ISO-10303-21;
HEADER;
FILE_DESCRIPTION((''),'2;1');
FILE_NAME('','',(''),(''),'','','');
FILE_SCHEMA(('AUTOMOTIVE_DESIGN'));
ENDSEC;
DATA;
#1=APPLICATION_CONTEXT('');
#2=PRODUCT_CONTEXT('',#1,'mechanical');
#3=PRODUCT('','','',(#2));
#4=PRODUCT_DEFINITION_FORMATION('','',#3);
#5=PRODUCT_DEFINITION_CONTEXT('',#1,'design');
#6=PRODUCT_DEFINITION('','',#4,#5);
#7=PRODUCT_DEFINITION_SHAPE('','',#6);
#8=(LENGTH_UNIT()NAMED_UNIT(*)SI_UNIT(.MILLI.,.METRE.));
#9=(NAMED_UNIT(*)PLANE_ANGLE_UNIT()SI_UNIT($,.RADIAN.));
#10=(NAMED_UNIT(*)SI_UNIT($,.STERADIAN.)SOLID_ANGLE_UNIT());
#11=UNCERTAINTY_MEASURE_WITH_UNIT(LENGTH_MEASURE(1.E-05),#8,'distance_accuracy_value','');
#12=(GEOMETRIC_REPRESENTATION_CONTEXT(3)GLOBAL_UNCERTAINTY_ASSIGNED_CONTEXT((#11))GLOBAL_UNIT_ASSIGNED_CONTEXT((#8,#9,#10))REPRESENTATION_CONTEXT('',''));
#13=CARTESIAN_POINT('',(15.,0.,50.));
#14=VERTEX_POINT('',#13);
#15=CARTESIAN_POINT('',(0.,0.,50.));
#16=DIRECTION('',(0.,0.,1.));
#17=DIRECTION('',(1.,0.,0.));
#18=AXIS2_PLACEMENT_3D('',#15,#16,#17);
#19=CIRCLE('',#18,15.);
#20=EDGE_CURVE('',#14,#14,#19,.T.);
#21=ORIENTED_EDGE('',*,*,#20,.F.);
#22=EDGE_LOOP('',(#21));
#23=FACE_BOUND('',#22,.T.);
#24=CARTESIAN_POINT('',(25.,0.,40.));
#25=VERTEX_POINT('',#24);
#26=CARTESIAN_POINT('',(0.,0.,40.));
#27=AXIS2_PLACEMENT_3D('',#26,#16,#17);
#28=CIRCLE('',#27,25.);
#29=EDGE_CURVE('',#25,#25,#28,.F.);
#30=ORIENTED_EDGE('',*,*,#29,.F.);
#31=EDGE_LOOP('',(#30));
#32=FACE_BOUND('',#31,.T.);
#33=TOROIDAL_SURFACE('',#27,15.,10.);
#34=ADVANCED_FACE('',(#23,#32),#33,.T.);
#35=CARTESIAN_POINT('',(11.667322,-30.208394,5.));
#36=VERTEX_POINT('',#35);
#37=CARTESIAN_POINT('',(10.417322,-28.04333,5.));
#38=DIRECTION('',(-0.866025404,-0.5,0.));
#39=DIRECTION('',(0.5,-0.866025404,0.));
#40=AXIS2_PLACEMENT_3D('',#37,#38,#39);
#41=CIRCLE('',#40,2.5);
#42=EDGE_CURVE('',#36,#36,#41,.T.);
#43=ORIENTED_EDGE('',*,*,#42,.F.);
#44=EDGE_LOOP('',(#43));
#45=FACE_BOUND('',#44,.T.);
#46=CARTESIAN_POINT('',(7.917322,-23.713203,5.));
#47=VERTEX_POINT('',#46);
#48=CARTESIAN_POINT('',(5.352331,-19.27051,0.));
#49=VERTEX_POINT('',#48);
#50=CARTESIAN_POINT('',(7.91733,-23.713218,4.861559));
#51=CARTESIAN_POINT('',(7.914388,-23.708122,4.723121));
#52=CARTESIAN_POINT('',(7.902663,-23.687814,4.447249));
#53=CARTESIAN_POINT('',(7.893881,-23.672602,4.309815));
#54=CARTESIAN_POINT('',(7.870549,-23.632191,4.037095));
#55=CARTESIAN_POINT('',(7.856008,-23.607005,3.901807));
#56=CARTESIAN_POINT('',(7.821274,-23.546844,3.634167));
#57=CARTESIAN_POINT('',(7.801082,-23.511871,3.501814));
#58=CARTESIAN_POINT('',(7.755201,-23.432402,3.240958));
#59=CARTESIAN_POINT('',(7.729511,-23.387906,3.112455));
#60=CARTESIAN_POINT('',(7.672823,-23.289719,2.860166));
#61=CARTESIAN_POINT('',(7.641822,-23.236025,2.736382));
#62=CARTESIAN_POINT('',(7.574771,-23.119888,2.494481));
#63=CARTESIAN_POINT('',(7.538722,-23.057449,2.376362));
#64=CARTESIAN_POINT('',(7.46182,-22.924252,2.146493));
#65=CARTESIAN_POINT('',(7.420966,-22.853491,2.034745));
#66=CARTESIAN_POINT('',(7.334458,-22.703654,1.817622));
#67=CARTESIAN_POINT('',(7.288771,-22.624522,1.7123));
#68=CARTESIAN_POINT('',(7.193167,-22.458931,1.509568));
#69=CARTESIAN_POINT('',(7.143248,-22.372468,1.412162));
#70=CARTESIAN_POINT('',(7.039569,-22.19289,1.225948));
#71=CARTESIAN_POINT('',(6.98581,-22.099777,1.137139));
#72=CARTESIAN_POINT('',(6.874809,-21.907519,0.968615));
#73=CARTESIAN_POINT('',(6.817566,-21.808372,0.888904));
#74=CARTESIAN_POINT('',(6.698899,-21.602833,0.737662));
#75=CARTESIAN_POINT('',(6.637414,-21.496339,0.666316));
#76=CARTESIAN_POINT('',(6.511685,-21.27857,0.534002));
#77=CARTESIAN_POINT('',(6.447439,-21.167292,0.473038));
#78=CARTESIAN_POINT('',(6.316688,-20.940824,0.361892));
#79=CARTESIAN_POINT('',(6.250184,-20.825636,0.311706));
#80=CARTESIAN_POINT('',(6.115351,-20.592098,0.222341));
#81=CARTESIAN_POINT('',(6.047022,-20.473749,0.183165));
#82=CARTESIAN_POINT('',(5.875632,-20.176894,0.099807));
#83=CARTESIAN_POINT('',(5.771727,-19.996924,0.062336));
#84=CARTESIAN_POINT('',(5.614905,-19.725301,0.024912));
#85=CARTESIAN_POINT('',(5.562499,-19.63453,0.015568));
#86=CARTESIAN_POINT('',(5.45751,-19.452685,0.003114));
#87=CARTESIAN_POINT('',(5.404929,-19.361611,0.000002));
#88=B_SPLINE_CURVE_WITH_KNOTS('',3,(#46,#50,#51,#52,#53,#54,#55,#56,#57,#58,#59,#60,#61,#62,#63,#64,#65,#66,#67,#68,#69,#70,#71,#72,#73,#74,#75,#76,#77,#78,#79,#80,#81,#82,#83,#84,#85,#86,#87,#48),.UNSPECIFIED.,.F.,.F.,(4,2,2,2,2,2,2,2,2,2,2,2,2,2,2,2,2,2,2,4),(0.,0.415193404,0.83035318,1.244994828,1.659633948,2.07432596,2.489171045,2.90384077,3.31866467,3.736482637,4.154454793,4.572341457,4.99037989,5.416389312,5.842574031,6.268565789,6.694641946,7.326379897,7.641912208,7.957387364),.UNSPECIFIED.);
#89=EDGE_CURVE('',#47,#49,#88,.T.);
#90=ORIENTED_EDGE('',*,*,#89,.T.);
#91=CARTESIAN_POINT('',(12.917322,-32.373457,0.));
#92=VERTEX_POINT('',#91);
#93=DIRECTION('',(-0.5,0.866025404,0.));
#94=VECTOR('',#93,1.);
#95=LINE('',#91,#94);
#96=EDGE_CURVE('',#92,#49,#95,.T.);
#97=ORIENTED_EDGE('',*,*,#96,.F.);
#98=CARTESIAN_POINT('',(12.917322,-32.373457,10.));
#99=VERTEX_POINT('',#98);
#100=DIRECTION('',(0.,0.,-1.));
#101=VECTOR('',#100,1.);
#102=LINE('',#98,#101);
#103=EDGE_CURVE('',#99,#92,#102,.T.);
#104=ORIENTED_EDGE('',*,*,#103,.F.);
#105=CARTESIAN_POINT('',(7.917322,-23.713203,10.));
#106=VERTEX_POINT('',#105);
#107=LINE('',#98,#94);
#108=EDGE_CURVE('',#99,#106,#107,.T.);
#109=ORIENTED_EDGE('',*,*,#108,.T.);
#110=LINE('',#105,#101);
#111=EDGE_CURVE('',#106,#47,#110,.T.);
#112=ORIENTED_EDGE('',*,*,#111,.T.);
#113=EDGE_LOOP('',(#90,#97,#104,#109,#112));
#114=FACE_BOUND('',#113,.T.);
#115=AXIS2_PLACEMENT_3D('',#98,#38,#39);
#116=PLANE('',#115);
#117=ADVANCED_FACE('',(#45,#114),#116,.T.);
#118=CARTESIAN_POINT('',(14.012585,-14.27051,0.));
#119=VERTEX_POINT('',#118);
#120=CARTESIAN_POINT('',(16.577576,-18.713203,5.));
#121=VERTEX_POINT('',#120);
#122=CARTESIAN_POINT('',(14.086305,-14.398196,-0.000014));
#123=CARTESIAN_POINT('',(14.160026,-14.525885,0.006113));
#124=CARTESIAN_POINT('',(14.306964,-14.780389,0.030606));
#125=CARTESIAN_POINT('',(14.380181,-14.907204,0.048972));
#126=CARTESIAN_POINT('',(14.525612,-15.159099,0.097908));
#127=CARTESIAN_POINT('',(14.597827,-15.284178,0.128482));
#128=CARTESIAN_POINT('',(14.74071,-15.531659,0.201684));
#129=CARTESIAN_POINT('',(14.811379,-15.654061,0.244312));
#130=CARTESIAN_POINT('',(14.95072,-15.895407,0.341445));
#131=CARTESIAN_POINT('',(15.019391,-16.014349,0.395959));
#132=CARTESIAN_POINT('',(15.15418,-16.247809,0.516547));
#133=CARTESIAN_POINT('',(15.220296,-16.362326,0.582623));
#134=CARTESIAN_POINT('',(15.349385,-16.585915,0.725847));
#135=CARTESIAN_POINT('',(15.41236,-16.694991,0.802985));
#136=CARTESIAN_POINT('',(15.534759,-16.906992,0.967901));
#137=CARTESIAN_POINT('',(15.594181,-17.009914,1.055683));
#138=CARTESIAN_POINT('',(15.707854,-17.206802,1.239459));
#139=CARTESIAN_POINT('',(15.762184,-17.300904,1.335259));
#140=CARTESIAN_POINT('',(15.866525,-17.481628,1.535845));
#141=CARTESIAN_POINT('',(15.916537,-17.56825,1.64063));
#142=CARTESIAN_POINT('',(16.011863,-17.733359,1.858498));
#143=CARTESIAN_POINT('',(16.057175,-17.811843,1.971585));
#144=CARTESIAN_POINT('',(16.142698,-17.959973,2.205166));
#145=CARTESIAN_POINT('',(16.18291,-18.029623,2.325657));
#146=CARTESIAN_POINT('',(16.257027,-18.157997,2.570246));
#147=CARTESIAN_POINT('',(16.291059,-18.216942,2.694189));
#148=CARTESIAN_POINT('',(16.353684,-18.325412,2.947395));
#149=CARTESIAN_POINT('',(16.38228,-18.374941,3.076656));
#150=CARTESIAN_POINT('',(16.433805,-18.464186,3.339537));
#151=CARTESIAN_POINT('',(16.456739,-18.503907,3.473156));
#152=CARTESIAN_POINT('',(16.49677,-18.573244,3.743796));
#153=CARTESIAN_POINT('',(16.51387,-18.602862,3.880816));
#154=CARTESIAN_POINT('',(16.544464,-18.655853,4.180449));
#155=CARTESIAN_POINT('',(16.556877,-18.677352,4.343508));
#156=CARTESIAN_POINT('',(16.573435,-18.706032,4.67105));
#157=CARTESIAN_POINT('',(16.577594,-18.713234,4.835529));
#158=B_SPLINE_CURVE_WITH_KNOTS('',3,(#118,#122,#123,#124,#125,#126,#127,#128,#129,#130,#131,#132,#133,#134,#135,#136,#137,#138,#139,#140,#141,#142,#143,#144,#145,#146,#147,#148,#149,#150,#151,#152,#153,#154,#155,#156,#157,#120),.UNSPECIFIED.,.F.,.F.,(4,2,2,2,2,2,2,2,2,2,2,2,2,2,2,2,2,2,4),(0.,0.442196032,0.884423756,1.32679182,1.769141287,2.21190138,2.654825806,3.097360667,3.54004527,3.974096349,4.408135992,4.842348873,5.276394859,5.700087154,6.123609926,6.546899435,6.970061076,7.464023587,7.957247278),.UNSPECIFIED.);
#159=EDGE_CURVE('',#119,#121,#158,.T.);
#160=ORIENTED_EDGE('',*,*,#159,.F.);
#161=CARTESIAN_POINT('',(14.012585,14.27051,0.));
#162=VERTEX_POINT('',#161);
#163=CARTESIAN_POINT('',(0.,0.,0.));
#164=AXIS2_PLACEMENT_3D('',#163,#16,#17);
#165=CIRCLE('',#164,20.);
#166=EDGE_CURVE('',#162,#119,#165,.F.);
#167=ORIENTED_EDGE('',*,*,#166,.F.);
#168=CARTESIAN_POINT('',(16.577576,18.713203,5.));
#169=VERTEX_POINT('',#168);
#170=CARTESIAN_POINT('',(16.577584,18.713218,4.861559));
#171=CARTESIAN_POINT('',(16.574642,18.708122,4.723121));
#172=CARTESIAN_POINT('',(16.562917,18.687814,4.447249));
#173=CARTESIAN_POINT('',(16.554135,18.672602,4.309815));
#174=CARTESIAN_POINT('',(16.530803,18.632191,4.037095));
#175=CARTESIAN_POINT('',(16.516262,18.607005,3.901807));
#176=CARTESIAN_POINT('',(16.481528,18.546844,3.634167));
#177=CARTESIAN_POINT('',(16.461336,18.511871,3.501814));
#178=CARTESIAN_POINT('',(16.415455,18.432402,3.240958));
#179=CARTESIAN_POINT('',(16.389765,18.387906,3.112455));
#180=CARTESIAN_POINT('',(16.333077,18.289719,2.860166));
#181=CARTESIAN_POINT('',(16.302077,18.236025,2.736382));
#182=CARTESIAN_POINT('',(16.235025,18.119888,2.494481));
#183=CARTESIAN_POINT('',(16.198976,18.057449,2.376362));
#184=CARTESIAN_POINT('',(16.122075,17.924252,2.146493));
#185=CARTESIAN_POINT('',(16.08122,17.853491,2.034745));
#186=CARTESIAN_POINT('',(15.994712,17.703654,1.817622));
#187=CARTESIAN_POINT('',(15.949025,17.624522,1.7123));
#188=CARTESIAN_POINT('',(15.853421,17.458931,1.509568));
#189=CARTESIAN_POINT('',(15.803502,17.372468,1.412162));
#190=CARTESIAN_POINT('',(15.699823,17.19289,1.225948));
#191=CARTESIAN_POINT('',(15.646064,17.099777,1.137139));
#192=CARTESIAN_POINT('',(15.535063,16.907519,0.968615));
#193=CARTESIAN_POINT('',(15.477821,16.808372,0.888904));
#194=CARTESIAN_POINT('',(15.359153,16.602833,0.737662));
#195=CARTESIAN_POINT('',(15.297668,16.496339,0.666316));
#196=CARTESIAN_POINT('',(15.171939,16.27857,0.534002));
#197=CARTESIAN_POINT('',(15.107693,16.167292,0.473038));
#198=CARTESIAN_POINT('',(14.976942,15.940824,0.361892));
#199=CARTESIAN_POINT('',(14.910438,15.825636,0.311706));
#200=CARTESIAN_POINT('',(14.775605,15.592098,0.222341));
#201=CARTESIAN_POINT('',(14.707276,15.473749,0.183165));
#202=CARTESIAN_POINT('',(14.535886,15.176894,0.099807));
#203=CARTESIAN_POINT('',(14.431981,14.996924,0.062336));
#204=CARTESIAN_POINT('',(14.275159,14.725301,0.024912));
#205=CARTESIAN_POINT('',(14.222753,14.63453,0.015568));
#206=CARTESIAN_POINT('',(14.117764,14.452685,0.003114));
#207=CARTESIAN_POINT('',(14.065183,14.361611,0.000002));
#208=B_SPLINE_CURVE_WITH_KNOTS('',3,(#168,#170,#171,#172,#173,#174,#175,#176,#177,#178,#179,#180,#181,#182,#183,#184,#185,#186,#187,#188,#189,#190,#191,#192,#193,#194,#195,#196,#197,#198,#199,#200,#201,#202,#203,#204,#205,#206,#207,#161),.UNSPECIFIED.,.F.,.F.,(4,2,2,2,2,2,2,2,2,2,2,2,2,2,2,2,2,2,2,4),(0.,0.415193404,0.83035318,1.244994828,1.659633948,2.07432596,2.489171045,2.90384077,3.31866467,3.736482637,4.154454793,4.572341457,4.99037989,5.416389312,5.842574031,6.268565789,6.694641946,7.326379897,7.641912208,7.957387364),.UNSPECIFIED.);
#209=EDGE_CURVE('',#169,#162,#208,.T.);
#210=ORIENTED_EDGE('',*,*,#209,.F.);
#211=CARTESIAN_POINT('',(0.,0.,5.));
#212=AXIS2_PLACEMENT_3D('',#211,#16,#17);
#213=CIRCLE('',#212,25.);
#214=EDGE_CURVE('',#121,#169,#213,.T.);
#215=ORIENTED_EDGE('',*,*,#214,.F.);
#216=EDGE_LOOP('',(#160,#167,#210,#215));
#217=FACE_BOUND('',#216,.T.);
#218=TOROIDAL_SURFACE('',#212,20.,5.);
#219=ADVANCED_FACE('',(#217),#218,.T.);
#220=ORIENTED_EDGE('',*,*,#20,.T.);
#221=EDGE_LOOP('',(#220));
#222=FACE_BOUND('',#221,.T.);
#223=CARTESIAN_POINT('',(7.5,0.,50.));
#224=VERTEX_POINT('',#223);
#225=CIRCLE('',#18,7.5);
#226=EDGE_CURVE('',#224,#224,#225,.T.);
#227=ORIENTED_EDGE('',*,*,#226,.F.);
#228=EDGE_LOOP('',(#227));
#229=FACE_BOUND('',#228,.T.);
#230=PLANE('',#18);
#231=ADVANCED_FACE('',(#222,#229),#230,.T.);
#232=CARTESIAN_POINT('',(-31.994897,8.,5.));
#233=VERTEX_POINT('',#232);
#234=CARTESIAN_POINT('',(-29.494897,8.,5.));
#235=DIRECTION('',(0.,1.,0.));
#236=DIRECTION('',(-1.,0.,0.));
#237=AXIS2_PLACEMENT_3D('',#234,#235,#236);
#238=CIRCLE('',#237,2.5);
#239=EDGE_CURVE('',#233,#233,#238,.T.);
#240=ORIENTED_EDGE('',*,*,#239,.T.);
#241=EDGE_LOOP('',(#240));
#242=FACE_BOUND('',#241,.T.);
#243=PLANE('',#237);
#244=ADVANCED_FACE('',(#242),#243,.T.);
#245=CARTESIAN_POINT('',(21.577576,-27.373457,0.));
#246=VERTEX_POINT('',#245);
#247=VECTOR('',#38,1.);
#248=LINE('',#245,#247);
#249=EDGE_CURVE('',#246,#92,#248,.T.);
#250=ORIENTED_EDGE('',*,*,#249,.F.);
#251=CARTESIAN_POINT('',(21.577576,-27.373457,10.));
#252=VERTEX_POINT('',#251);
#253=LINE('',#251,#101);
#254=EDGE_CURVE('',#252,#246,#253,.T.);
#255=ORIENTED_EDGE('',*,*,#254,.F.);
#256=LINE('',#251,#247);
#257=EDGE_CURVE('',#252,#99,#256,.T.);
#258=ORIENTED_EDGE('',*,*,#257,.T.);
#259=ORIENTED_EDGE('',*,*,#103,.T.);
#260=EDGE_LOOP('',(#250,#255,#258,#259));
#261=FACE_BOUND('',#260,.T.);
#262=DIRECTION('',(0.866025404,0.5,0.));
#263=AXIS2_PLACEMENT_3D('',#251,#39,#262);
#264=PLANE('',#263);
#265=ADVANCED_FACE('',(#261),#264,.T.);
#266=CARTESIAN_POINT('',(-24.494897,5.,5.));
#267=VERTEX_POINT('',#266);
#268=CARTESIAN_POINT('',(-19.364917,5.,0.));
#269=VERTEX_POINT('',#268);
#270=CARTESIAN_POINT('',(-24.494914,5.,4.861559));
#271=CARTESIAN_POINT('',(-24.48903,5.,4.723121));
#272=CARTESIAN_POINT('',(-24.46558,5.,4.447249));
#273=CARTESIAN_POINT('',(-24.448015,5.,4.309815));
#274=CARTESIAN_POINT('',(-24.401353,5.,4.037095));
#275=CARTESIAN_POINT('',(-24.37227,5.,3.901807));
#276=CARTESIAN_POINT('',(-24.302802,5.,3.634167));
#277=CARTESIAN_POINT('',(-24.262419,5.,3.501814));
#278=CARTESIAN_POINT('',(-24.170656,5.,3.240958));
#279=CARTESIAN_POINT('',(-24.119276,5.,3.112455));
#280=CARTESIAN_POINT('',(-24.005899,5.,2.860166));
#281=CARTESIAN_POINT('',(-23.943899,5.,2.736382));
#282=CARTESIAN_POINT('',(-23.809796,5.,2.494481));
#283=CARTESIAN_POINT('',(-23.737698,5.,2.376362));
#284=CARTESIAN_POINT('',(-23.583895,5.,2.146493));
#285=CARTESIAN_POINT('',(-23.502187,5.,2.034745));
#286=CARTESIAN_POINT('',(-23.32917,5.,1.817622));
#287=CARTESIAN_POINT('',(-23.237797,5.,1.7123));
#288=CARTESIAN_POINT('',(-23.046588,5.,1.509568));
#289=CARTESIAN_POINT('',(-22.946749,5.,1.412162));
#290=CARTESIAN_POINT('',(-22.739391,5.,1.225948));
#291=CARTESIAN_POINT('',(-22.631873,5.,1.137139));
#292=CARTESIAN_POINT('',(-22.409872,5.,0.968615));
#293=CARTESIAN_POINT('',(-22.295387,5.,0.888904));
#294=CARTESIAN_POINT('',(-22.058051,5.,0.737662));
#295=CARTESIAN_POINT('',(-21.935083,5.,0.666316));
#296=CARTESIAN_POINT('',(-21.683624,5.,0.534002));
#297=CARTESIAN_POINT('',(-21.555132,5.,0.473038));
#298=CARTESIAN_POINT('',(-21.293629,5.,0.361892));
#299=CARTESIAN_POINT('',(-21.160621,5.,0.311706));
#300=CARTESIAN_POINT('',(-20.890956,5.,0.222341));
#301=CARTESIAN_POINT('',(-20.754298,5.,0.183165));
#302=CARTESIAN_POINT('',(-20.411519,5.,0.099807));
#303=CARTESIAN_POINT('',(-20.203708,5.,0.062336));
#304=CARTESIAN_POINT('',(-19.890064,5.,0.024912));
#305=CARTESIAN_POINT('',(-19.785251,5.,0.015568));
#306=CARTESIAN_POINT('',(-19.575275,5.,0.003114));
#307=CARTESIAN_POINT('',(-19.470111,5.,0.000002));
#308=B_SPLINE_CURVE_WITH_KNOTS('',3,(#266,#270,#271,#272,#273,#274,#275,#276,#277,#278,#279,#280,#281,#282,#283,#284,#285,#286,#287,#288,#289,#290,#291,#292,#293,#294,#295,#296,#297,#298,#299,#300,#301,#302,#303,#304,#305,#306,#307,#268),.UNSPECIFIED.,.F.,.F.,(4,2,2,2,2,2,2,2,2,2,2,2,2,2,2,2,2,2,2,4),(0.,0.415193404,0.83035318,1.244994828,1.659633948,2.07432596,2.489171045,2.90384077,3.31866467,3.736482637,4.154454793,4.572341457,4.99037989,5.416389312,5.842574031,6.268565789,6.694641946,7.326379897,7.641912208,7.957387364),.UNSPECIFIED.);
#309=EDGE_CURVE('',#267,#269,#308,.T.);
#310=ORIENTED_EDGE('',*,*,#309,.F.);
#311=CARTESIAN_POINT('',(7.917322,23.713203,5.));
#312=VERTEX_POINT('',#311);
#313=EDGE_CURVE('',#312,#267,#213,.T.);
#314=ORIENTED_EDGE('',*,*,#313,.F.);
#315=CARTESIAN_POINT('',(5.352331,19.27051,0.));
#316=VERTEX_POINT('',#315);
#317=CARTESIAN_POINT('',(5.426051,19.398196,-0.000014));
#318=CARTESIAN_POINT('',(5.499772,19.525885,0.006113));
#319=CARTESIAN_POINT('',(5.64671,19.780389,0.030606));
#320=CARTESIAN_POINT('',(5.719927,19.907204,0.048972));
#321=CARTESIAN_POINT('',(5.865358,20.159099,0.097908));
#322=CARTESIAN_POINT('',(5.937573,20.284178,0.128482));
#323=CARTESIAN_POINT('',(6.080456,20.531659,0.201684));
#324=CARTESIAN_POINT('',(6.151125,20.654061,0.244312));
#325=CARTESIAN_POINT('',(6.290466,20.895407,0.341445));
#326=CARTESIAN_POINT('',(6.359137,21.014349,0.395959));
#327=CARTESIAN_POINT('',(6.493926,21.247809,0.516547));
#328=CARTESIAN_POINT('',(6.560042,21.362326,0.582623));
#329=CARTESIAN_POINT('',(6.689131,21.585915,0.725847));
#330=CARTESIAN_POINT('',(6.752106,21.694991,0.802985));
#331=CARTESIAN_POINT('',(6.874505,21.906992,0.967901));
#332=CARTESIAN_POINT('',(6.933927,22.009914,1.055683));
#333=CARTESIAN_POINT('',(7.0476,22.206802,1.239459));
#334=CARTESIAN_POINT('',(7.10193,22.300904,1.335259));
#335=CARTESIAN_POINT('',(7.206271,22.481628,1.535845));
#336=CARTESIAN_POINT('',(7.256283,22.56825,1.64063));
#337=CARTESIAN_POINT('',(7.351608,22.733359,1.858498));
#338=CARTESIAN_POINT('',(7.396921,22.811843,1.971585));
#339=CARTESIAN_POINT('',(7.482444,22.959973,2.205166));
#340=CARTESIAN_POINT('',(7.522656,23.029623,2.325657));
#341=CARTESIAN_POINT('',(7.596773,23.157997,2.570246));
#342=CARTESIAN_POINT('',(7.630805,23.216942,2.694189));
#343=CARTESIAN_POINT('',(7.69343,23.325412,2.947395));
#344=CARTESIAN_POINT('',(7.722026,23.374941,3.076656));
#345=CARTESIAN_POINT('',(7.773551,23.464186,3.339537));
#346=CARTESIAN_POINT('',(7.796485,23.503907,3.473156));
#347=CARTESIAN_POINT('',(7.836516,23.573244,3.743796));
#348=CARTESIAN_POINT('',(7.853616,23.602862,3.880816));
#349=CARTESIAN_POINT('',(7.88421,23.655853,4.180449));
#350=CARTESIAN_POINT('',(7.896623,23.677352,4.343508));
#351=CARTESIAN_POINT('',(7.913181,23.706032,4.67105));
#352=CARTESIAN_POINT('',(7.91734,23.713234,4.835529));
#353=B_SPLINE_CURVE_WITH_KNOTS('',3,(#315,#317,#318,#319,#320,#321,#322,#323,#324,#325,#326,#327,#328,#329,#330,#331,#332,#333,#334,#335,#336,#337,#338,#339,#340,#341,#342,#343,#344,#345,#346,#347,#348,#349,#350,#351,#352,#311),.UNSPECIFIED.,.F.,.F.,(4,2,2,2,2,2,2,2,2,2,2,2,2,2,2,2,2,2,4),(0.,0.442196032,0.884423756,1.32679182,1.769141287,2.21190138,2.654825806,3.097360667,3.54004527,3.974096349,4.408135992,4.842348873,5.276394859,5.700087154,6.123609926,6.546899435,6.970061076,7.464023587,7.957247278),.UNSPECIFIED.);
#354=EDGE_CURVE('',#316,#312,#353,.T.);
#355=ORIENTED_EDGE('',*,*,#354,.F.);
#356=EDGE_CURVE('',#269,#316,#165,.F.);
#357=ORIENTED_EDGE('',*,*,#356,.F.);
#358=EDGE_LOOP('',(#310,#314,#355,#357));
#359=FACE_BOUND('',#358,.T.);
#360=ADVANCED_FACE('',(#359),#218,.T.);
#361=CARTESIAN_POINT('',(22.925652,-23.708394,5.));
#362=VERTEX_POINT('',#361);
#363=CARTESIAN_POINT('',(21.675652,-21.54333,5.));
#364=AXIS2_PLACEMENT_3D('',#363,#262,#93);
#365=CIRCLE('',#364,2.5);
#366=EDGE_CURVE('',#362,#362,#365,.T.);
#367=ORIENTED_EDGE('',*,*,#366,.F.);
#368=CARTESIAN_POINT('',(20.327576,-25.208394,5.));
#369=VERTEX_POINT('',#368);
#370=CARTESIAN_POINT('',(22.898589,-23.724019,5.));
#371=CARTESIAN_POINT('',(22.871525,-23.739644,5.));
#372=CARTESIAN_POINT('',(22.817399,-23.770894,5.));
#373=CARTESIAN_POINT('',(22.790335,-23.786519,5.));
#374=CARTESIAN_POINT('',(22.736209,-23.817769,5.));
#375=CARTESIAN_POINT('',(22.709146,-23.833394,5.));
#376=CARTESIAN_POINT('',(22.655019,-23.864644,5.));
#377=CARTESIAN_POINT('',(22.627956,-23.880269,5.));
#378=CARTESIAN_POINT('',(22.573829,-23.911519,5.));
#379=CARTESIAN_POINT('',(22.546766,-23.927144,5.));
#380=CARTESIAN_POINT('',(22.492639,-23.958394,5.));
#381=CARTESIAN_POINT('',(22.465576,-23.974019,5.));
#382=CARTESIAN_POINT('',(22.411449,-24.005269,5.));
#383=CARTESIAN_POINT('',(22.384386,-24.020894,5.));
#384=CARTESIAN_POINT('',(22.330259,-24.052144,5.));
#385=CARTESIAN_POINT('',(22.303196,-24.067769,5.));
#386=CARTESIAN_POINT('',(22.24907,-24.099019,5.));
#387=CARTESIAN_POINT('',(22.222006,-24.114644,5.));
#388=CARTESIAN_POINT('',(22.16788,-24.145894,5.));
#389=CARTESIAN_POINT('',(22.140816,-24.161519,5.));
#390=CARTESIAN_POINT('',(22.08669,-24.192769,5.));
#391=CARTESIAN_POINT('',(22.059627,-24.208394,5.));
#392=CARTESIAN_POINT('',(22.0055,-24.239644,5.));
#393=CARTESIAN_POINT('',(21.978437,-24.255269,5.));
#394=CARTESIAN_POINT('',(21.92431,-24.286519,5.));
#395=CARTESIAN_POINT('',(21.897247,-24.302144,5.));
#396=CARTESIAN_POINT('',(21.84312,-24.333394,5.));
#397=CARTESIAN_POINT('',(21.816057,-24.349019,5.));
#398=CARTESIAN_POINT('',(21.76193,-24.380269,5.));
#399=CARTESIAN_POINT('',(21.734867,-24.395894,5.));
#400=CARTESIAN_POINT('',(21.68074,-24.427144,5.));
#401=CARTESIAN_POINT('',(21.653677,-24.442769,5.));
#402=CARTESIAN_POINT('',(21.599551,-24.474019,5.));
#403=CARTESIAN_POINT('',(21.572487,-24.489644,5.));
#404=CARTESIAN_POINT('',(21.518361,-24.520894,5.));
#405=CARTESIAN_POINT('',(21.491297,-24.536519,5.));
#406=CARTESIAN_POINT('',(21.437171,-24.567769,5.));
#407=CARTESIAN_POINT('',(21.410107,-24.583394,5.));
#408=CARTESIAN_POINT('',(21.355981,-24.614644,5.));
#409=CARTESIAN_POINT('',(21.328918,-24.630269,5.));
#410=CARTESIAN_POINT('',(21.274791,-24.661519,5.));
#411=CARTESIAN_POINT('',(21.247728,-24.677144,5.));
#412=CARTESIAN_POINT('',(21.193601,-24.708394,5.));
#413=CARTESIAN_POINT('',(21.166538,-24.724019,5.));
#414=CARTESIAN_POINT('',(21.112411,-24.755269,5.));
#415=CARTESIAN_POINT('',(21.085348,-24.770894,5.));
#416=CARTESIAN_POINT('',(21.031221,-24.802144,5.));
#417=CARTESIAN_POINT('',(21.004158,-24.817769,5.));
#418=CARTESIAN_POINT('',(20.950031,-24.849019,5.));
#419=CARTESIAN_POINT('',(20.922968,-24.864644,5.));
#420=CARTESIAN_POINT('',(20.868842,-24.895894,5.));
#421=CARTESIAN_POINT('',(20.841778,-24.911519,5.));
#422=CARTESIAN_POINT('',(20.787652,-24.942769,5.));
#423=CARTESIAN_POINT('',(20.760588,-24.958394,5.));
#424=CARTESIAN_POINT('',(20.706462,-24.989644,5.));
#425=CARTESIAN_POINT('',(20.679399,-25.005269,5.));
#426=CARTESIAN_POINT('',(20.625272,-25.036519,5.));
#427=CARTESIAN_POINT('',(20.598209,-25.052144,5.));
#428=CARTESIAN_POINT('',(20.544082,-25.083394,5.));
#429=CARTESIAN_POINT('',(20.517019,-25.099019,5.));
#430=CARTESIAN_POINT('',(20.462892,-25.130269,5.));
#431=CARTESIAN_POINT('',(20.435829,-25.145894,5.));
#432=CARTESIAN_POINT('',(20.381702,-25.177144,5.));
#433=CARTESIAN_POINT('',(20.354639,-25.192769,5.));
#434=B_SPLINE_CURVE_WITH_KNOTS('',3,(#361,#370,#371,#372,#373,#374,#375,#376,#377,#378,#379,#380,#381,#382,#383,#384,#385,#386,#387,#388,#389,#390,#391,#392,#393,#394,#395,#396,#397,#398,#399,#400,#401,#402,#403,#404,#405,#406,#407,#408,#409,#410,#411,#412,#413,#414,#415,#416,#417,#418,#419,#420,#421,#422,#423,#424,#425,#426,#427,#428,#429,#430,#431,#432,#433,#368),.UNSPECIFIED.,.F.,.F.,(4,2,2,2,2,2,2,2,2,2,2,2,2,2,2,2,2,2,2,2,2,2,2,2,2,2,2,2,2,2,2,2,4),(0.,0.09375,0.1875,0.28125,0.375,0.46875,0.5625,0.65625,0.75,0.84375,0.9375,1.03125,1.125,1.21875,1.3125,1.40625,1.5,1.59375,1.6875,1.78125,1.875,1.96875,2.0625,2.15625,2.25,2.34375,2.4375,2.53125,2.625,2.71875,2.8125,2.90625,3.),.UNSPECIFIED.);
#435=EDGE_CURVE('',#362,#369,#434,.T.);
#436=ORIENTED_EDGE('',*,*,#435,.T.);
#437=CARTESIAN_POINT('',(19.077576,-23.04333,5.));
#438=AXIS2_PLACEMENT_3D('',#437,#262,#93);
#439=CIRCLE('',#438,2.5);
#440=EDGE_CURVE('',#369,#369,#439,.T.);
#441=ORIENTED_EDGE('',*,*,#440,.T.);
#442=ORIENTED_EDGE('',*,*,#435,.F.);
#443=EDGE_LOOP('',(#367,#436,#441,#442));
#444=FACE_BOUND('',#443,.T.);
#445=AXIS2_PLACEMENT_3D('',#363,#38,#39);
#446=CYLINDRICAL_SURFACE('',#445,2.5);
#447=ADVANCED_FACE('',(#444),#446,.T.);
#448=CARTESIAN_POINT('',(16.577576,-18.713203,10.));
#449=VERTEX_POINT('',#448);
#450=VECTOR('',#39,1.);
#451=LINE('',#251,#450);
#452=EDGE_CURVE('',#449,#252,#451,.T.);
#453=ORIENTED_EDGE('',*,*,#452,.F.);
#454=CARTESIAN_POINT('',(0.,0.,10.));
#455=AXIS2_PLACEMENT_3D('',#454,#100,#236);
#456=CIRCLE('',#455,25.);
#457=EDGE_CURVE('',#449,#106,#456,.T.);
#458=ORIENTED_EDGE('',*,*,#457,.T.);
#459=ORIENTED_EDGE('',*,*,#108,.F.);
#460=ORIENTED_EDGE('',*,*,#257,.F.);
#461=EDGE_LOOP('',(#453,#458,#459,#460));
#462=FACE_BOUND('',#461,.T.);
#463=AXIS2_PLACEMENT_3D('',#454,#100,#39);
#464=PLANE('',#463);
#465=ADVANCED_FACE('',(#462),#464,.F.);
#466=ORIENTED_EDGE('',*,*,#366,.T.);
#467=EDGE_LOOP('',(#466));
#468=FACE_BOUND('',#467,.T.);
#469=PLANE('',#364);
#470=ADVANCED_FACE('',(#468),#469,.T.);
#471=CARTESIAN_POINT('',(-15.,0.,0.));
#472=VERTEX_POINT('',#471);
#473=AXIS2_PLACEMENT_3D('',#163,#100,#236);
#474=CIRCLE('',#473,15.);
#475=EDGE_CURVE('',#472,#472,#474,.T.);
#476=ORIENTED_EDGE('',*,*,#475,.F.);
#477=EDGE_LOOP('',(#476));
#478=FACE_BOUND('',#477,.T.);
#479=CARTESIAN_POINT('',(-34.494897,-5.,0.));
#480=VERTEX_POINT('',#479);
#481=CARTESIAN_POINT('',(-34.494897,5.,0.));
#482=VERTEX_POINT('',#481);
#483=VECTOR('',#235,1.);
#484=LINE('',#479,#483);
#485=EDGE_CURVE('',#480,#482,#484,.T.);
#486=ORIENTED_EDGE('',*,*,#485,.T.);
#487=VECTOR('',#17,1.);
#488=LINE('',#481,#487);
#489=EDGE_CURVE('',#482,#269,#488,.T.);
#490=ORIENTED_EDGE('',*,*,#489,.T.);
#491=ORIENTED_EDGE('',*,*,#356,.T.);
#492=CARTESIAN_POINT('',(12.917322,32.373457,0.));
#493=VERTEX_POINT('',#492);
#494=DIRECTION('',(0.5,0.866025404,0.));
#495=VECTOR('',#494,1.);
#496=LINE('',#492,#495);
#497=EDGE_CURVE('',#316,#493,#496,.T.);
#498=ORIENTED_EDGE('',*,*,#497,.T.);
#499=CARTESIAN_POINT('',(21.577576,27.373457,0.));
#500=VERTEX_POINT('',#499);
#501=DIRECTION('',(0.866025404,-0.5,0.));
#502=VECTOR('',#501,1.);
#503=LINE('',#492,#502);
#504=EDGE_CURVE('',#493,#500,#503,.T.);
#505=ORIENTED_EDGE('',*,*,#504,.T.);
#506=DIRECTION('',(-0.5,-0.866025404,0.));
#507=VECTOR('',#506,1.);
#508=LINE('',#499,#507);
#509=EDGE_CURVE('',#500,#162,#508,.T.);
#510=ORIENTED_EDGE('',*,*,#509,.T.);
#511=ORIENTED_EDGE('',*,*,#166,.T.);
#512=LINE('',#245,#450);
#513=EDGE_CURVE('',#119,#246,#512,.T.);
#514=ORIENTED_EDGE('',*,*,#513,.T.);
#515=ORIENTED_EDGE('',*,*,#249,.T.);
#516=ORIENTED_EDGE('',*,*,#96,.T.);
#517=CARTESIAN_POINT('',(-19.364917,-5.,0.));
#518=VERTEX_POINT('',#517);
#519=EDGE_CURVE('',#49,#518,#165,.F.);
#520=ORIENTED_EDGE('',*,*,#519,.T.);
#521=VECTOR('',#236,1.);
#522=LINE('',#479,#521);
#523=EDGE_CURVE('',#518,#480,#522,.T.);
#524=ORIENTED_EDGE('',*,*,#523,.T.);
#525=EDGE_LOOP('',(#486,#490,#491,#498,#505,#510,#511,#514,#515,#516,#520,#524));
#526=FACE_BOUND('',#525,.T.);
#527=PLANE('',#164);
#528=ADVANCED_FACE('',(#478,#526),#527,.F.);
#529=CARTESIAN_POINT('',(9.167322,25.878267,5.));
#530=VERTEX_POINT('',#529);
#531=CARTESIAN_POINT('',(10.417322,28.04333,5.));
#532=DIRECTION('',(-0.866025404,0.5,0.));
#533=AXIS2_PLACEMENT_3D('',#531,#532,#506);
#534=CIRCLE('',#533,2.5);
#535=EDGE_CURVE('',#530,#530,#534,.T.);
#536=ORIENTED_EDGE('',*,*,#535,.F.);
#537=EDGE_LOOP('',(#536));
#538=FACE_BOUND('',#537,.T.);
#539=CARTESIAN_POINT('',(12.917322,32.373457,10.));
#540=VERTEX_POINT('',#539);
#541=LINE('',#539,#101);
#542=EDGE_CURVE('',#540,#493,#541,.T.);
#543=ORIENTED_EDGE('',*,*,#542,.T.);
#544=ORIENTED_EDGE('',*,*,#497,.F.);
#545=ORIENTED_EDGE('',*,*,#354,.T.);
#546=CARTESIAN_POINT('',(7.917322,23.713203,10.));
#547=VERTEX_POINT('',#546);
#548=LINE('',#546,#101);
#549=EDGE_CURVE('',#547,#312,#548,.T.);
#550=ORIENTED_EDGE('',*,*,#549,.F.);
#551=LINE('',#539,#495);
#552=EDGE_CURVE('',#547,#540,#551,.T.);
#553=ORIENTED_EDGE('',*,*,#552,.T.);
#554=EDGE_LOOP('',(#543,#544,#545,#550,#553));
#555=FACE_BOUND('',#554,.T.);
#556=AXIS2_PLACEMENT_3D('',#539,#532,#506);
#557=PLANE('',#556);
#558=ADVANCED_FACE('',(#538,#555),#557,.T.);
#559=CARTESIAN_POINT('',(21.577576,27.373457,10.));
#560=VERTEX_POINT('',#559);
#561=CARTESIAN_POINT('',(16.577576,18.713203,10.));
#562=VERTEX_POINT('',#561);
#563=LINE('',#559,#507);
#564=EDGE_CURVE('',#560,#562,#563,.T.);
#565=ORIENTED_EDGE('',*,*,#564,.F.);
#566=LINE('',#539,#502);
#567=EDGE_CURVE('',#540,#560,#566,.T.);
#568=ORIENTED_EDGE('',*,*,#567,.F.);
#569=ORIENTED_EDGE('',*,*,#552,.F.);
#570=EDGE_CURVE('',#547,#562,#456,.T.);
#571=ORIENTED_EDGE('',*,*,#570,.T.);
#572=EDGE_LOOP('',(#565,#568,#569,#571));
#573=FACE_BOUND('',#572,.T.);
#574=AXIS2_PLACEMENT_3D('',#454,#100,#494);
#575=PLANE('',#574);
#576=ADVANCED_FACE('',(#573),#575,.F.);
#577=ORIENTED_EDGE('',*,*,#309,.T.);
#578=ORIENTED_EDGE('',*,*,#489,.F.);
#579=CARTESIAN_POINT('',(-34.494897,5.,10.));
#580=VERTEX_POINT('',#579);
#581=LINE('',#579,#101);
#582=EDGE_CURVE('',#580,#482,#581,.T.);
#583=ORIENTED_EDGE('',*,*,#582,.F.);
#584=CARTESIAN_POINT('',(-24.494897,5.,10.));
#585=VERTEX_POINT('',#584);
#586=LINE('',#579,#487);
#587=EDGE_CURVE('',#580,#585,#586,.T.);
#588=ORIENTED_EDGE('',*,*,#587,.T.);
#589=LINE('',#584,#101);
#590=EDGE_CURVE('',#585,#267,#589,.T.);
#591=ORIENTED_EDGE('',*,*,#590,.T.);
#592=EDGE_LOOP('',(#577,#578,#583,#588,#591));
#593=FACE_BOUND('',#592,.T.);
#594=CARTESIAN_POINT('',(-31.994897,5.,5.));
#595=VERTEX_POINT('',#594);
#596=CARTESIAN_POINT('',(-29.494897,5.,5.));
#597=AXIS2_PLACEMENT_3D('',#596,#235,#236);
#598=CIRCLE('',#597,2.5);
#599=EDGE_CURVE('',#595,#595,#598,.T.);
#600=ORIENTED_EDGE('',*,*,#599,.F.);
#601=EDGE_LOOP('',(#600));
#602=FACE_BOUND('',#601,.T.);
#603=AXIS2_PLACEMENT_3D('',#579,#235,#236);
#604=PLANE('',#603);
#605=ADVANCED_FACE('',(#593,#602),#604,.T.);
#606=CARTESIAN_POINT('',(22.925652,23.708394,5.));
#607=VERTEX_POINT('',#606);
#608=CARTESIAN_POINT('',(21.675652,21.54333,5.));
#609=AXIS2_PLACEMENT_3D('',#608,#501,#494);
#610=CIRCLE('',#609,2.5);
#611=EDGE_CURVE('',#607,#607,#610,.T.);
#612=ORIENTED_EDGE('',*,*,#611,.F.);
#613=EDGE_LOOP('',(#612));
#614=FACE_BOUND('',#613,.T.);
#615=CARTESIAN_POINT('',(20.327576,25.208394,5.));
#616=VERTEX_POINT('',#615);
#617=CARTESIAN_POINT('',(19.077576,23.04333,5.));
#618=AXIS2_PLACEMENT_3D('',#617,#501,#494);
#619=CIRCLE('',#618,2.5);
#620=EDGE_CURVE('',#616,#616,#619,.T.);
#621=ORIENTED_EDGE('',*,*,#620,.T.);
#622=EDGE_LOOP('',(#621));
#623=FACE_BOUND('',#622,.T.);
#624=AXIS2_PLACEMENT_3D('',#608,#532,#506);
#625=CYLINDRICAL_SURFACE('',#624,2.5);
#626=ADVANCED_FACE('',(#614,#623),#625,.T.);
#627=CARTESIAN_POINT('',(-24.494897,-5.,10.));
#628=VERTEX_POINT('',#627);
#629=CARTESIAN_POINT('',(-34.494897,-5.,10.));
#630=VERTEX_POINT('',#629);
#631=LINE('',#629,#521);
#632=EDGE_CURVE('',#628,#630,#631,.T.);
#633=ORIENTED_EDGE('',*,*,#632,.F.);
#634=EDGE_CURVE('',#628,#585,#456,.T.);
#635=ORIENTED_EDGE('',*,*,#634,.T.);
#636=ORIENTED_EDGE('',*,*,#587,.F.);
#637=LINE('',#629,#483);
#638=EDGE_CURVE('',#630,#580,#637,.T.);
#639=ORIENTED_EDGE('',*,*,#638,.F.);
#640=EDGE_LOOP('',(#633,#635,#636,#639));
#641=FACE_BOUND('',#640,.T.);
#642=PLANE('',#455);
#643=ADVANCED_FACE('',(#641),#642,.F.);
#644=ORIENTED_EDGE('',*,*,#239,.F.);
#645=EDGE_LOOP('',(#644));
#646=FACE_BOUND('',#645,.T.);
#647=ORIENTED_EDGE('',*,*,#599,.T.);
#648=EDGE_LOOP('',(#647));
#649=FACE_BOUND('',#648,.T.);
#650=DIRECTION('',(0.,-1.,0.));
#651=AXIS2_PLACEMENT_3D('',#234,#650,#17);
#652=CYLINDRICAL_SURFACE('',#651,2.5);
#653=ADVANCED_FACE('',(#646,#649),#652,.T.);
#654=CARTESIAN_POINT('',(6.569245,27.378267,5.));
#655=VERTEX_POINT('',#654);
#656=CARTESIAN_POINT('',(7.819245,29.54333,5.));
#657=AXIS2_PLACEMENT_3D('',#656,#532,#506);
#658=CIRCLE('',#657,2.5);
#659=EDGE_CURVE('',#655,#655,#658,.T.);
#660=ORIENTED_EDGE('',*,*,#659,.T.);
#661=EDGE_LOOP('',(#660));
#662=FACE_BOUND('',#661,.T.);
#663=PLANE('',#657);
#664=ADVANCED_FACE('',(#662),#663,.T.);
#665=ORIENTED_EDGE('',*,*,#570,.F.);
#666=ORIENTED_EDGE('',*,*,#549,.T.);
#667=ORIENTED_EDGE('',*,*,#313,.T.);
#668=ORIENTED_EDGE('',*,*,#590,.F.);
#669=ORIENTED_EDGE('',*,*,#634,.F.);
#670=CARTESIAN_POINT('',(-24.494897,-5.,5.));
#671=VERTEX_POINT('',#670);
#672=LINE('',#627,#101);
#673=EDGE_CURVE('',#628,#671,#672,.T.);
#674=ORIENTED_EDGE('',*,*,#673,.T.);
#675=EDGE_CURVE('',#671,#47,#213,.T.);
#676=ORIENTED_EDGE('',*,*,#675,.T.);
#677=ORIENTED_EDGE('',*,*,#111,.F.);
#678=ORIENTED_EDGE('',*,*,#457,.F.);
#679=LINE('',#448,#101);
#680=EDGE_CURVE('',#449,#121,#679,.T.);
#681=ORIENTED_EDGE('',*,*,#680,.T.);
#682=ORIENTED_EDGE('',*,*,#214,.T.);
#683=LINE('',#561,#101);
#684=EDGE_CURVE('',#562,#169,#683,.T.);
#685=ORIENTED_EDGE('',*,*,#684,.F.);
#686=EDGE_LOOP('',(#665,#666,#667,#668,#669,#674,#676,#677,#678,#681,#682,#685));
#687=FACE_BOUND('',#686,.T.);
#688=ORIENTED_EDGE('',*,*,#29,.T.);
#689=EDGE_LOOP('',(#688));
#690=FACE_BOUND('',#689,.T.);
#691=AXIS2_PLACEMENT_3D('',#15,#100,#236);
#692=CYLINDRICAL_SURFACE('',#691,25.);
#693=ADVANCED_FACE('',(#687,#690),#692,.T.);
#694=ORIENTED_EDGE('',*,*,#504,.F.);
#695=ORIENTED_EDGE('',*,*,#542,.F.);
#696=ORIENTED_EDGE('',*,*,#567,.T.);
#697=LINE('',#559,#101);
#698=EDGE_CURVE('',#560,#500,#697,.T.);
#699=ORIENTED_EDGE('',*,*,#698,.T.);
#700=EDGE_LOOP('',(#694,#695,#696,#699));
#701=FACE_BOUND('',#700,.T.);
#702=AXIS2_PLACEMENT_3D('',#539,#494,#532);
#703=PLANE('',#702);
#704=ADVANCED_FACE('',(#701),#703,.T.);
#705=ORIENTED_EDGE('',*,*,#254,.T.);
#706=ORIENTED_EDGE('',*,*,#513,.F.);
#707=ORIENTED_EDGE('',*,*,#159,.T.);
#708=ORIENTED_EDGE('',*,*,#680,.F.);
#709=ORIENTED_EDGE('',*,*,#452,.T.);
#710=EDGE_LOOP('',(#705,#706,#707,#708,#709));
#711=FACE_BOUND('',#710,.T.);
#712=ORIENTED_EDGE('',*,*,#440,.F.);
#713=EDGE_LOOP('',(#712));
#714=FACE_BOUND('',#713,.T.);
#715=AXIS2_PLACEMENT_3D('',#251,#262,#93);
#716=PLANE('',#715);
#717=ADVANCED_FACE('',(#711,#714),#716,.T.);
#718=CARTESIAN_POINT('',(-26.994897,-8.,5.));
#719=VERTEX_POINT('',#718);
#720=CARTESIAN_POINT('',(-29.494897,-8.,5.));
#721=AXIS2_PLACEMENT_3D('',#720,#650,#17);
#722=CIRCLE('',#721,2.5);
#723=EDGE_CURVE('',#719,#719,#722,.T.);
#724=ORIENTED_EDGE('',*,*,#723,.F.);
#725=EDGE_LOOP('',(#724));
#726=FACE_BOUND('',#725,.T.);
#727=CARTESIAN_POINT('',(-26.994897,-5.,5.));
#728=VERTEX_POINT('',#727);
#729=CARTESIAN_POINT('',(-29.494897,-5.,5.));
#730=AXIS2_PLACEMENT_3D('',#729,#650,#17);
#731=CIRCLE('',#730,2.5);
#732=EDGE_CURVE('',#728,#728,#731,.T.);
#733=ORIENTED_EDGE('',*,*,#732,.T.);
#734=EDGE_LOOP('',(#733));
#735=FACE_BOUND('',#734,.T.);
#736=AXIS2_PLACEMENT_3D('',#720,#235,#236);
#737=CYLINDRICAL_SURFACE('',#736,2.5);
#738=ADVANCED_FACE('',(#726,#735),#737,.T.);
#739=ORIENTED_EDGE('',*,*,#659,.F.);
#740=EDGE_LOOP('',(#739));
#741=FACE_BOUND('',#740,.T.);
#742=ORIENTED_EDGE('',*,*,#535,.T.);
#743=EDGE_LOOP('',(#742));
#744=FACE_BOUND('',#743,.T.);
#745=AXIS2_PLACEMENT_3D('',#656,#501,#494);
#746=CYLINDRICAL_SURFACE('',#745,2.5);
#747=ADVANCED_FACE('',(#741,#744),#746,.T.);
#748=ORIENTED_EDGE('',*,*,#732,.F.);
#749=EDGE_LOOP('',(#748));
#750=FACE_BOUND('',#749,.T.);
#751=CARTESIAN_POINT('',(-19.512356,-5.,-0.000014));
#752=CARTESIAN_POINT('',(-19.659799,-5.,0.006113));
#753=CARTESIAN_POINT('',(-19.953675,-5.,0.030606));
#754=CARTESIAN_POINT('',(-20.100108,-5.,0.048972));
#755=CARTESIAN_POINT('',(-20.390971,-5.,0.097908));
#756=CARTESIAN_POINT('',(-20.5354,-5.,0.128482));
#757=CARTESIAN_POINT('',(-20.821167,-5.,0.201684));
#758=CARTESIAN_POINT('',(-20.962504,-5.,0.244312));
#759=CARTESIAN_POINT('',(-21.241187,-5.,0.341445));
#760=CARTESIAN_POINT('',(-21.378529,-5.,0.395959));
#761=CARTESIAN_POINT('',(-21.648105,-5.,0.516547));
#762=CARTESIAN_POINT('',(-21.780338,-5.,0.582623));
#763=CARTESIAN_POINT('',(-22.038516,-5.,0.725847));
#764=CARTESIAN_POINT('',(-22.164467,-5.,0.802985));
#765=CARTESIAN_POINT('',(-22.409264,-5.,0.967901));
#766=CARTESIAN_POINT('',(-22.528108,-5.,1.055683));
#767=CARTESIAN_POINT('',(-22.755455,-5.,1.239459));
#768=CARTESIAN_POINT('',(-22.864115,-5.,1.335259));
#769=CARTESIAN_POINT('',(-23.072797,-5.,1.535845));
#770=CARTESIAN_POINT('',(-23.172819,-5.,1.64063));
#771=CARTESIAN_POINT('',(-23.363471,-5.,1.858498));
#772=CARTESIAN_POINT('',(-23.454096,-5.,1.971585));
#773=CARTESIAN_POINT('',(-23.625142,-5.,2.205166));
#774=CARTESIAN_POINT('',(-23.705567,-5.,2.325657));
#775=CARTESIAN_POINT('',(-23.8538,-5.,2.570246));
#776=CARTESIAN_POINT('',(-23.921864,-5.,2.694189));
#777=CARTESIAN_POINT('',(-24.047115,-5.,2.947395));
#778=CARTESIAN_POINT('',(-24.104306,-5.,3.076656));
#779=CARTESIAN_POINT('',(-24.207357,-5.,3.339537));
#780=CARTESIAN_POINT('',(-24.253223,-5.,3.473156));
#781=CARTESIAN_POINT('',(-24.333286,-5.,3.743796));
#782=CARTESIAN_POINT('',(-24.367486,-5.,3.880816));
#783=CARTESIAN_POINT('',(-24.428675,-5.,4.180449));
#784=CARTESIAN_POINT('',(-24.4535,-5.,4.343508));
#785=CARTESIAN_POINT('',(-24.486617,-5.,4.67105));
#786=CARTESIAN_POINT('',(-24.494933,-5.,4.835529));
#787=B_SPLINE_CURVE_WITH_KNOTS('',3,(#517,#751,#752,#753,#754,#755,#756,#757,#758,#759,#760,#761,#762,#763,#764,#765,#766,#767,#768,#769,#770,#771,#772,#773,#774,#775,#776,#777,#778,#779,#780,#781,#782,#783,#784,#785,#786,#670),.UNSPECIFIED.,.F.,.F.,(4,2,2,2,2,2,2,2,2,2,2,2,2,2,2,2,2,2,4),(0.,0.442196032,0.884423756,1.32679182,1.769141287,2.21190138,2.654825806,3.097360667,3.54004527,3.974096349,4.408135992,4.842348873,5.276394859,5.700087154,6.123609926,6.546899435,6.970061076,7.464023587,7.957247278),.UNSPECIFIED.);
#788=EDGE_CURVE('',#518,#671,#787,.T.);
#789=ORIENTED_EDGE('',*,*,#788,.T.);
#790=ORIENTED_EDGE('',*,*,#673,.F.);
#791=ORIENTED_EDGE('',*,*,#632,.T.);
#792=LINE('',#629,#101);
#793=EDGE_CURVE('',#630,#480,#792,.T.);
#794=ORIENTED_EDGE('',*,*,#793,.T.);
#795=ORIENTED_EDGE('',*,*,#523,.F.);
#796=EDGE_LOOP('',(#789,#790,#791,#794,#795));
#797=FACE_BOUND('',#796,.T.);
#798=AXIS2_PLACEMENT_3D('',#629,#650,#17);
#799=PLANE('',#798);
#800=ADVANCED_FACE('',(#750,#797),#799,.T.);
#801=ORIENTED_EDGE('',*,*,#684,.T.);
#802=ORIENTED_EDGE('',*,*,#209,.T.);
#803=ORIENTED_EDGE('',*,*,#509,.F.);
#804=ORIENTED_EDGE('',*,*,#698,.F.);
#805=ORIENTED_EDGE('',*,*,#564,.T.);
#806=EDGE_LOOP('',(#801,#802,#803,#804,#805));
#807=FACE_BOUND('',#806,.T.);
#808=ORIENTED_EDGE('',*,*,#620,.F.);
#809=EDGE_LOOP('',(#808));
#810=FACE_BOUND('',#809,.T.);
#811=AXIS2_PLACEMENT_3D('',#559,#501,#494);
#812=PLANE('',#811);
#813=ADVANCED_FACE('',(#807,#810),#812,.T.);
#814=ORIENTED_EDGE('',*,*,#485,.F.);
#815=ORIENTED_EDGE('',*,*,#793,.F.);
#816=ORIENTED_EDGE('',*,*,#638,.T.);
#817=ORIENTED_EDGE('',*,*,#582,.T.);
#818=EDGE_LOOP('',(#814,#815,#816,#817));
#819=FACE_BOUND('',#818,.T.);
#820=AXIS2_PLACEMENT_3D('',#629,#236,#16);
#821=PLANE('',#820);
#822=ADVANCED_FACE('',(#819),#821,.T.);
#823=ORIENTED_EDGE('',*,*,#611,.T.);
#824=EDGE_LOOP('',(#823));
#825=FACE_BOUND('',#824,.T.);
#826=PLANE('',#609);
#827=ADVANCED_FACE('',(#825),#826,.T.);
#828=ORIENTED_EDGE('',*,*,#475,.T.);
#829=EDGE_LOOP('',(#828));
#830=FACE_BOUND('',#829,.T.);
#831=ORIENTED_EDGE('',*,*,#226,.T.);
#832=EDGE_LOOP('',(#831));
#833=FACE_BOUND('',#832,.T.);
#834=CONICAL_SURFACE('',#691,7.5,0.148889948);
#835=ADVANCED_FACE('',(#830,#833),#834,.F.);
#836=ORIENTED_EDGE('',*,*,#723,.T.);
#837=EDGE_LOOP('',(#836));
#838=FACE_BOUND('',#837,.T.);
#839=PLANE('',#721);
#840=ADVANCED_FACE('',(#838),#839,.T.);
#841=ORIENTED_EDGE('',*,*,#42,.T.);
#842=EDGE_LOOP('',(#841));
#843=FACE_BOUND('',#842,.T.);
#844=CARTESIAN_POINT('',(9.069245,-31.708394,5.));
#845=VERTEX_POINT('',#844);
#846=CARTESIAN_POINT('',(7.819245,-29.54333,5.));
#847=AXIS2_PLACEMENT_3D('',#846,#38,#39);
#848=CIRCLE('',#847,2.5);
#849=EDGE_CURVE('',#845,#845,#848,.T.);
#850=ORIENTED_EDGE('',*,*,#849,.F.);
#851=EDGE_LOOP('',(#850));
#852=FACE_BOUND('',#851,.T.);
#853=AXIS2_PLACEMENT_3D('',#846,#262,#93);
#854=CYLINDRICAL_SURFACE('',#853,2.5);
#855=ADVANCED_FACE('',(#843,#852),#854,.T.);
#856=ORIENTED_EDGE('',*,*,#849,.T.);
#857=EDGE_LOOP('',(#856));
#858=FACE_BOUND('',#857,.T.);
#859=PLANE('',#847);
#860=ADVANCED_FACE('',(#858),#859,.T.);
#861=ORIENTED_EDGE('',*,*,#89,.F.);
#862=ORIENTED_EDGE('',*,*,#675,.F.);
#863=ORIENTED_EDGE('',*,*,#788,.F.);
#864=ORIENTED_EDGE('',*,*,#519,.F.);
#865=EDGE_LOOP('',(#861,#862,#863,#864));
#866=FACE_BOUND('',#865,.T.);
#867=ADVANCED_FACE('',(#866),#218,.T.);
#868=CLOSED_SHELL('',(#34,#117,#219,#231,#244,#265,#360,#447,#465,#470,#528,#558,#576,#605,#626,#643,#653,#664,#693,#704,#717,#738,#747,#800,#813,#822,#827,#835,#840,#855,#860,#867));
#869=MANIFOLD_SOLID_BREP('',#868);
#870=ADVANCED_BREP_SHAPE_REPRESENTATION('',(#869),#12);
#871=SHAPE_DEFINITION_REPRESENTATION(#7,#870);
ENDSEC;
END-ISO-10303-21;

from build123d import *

# Parameters (mm, degrees)
SKETCH1_R           = 25
BOSS_EXTRUDE1_DEPTH = 50
SKETCH2_W           = 10
SKETCH2_H           = 10
BOSS_EXTRUDE2_DEPTH = 10
SKETCH3_R           = 2.5
BOSS_EXTRUDE3_DEPTH = 3
BOSS_EXTRUDE4_START = 3
SKETCH4_R           = 2.5
BOSS_EXTRUDE4_DEPTH = 3
CIRPATTERN1_COUNT   = 3
SKETCH5_R           = 7.5
SKETCH6_R           = 15
FILLET1_R           = 10
FILLET2_R           = 5


with BuildPart() as part:
    # Sketch1 → Boss-Extrude1 (new body)
    with BuildSketch(Plane.XY):
        Circle(SKETCH1_R)
    extrude(amount=BOSS_EXTRUDE1_DEPTH)

    # Sketch2 → Boss-Extrude2 (add)
    with BuildSketch(Plane(origin=(0, 0, 0), x_dir=(-1, 0, 0), z_dir=(0, 0, -1))):
        with Locations((29.494897428, 0)):
            Rectangle(SKETCH2_W, SKETCH2_H)
    boss_extrude2 = extrude(amount=-BOSS_EXTRUDE2_DEPTH)

    # Sketch3 → Boss-Extrude3 (add)
    with BuildSketch(Plane.XZ.offset(5)):
        with Locations((-29.494897428, 5)):
            Circle(SKETCH3_R)
    boss_extrude3 = extrude(amount=BOSS_EXTRUDE3_DEPTH)

    # Sketch4 → Boss-Extrude4 (add)
    with BuildSketch(Plane(origin=(0, 5, 0), x_dir=(1, 0, 0), z_dir=(0, 1, 0)).offset(BOSS_EXTRUDE4_START)):
        with Locations((-29.494897428, -5)):
            Circle(SKETCH4_R)
    boss_extrude4 = extrude(amount=-BOSS_EXTRUDE4_DEPTH)

    # CirPattern1: Boss-Extrude2, Boss-Extrude3, Boss-Extrude4 ×3 about axis
    cirpattern1_axis = Axis((0, 0, 0), (0, 0, 1))
    add([boss_extrude2.rotate(cirpattern1_axis, i * 360 / CIRPATTERN1_COUNT) for i in range(1, CIRPATTERN1_COUNT)])
    add([boss_extrude3.rotate(cirpattern1_axis, i * 360 / CIRPATTERN1_COUNT) for i in range(1, CIRPATTERN1_COUNT)])
    add([boss_extrude4.rotate(cirpattern1_axis, i * 360 / CIRPATTERN1_COUNT) for i in range(1, CIRPATTERN1_COUNT)])

    # Sketch5 → Cut-Loft1 section 0
    with BuildSketch(Plane.XY.offset(50)):
        Circle(SKETCH5_R)
    # Sketch6 → Cut-Loft1 section 1
    with BuildSketch(Plane(origin=(0, 0, 0), x_dir=(-1, 0, 0), z_dir=(0, 0, -1))):
        Circle(SKETCH6_R)
    loft(mode=Mode.SUBTRACT)

    # Fillet1
    fillet1_edges = [part.edges().sort_by_distance(p)[0] for p in [
        (-25, 0, 50),
    ]]
    fillet(fillet1_edges, radius=FILLET1_R)

    # Fillet2
    # the kernel refuses this fillet: 5 mm, written as the material it takes off along each edge
    with BuildSketch(Plane(origin=(0, 0, 0), x_dir=(0.22300738877667003, -0.9748167543446364, 0), z_dir=(-0.9748167543446364, -0.22300738877667003, 0))) as fillet2_piece_1_section:
        with BuildLine():
            CenterArc((25 - FILLET2_R, FILLET2_R), FILLET2_R, 270, 90)
            Line((25 - FILLET2_R, 0), (25, 0))
            Line((25, 0), (25, FILLET2_R))
        make_face()
    fillet2_piece_1 = revolve(axis=Axis((0, 0, 0), (0, 0, 1)), revolution_arc=77.11426693, mode=Mode.PRIVATE)
    fillet2_piece_1 = split(fillet2_piece_1, bisect_by=Plane(origin=(7.29782447, -22.640202767, 1.23109977), z_dir=(-0.8660254037844394, -0.49999999999999883, 0)), keep=Keep.TOP, mode=Mode.PRIVATE)
    add(fillet2_piece_1, mode=Mode.SUBTRACT)
    with BuildSketch(Plane(origin=(0, 0, 0), x_dir=(0.22300738877667003, -0.9748167543446364, 0), z_dir=(-0.9748167543446364, -0.22300738877667003, 0))) as fillet2_piece_2_section:
        with BuildLine():
            CenterArc((25 - FILLET2_R, FILLET2_R), FILLET2_R, 270, 90)
            Line((25 - FILLET2_R, 0), (25, 0))
            Line((25, 0), (25, FILLET2_R))
        make_face()
    fillet2_piece_2 = revolve(axis=Axis((0, 0, 0), (0, 0, 1)), revolution_arc=77.11426693, mode=Mode.PRIVATE)
    fillet2_piece_2 = split(fillet2_piece_2, bisect_by=Plane(origin=(13.725987665, -13.77410802, 1.168109868), z_dir=(0.8660254037844394, 0.4999999999999987, 0)), keep=Keep.TOP, mode=Mode.PRIVATE)
    add(fillet2_piece_2, mode=Mode.SUBTRACT)
    with BuildSketch(Plane(origin=(0, 0, 0), x_dir=(0.732831285228025, 0.68041039629847, 0), z_dir=(0.68041039629847, -0.732831285228025, 0))) as fillet2_piece_3_section:
        with BuildLine():
            CenterArc((25 - FILLET2_R, FILLET2_R), FILLET2_R, 270, 90)
            Line((25 - FILLET2_R, 0), (25, 0))
            Line((25, 0), (25, FILLET2_R))
        make_face()
    fillet2_piece_3 = revolve(axis=Axis((0, 0, 0), (0, 0, 1)), revolution_arc=154.248557626, mode=Mode.PRIVATE)
    fillet2_piece_3 = split(fillet2_piece_3, bisect_by=Plane(origin=(15.957681681, 17.639515442, 1.230959753), z_dir=(0.8660254037844378, -0.5000000000000014, 0)), keep=Keep.TOP, mode=Mode.PRIVATE)
    add(fillet2_piece_3, mode=Mode.SUBTRACT)
    with BuildSketch(Plane(origin=(0, 0, 0), x_dir=(0.732831285228025, 0.68041039629847, 0), z_dir=(0.68041039629847, -0.732831285228025, 0))) as fillet2_piece_4_section:
        with BuildLine():
            CenterArc((25 - FILLET2_R, FILLET2_R), FILLET2_R, 270, 90)
            Line((25 - FILLET2_R, 0), (25, 0))
            Line((25, 0), (25, FILLET2_R))
        make_face()
    fillet2_piece_4 = revolve(axis=Axis((0, 0, 0), (0, 0, 1)), revolution_arc=154.248557626, mode=Mode.PRIVATE)
    fillet2_piece_4 = split(fillet2_piece_4, bisect_by=Plane(origin=(1.564958422, 12.710587499, 1.419658234), z_dir=(-0.8660254037844378, 0.5000000000000017, 0)), keep=Keep.TOP, mode=Mode.PRIVATE)
    fillet2_piece_4 = split(fillet2_piece_4, bisect_by=Plane(origin=(-11.790170883, 5, 1.419658234), z_dir=(0, 1, 0)), keep=Keep.TOP, mode=Mode.PRIVATE)
    add(fillet2_piece_4, mode=Mode.SUBTRACT)
    with BuildSketch(Plane(origin=(0, 0, 0), x_dir=(0.732831285228025, 0.68041039629847, 0), z_dir=(0.68041039629847, -0.732831285228025, 0))) as fillet2_piece_5_section:
        with BuildLine():
            CenterArc((25 - FILLET2_R, FILLET2_R), FILLET2_R, 270, 90)
            Line((25 - FILLET2_R, 0), (25, 0))
            Line((25, 0), (25, FILLET2_R))
        make_face()
    fillet2_piece_5 = revolve(axis=Axis((0, 0, 0), (0, 0, 1)), revolution_arc=154.248557626, mode=Mode.PRIVATE)
    fillet2_piece_5 = split(fillet2_piece_5, bisect_by=Plane(origin=(-23.255109262, -5, 1.230959847), z_dir=(0, -1, 0)), keep=Keep.TOP, mode=Mode.PRIVATE)
    add(fillet2_piece_5, mode=Mode.SUBTRACT)
    with BuildSketch(Plane(origin=(0, 0, 0), x_dir=(-0.9556683308075251, 0.29444531154623416, 0), z_dir=(0.29444531154623416, 0.9556683308075251, 0))) as fillet2_piece_6_section:
        with BuildLine():
            CenterArc((25 - FILLET2_R, FILLET2_R), FILLET2_R, 270, 90)
            Line((25 - FILLET2_R, 0), (25, 0))
            Line((25, 0), (25, FILLET2_R))
        make_face()
    fillet2_piece_6 = revolve(axis=Axis((0, 0, 0), (0, 0, 1)), revolution_arc=154.248557626, mode=Mode.PRIVATE)
    fillet2_piece_6 = split(fillet2_piece_6, bisect_by=Plane(origin=(-23.255109324, 5, 1.230959753), z_dir=(0, 1, 0)), keep=Keep.TOP, mode=Mode.PRIVATE)
    add(fillet2_piece_6, mode=Mode.SUBTRACT)
    with BuildSketch(Plane(origin=(0, 0, 0), x_dir=(-0.9556683308075251, 0.29444531154623416, 0), z_dir=(0.29444531154623416, 0.9556683308075251, 0))) as fillet2_piece_7_section:
        with BuildLine():
            CenterArc((25 - FILLET2_R, FILLET2_R), FILLET2_R, 270, 90)
            Line((25 - FILLET2_R, 0), (25, 0))
            Line((25, 0), (25, FILLET2_R))
        make_face()
    fillet2_piece_7 = revolve(axis=Axis((0, 0, 0), (0, 0, 1)), revolution_arc=154.248557626, mode=Mode.PRIVATE)
    fillet2_piece_7 = split(fillet2_piece_7, bisect_by=Plane(origin=(1.564958422, -12.710587499, 1.419658234), z_dir=(-0.8660254037844394, -0.49999999999999883, 0)), keep=Keep.TOP, mode=Mode.PRIVATE)
    fillet2_piece_7 = split(fillet2_piece_7, bisect_by=Plane(origin=(-11.790170883, -5, 1.419658234), z_dir=(0, -1, 0)), keep=Keep.TOP, mode=Mode.PRIVATE)
    add(fillet2_piece_7, mode=Mode.SUBTRACT)
    with BuildSketch(Plane(origin=(0, 0, 0), x_dir=(-0.9556683308075251, 0.29444531154623416, 0), z_dir=(0.29444531154623416, 0.9556683308075251, 0))) as fillet2_piece_8_section:
        with BuildLine():
            CenterArc((25 - FILLET2_R, FILLET2_R), FILLET2_R, 270, 90)
            Line((25 - FILLET2_R, 0), (25, 0))
            Line((25, 0), (25, FILLET2_R))
        make_face()
    fillet2_piece_8 = revolve(axis=Axis((0, 0, 0), (0, 0, 1)), revolution_arc=154.248557626, mode=Mode.PRIVATE)
    fillet2_piece_8 = split(fillet2_piece_8, bisect_by=Plane(origin=(15.95768165, -17.639515389, 1.230959847), z_dir=(0.8660254037844394, 0.4999999999999987, 0)), keep=Keep.TOP, mode=Mode.PRIVATE)
    add(fillet2_piece_8, mode=Mode.SUBTRACT)
    with BuildSketch(Plane(origin=(0, 0, 0), x_dir=(1, 0, 0), z_dir=(0, -1, 0))) as fillet2_piece_9_section:
        with BuildLine():
            CenterArc((25 - FILLET2_R, FILLET2_R), FILLET2_R, 270, 90)
            Line((25 - FILLET2_R, 0), (25, 0))
            Line((25, 0), (25, FILLET2_R))
        make_face()
    fillet2_piece_9 = revolve(axis=Axis((0, 0, 0), (0, 0, 1)), revolution_arc=77.11426693, mode=Mode.PRIVATE)
    fillet2_piece_9 = split(fillet2_piece_9, bisect_by=Plane(origin=(13.725987546, 13.774107814, 1.168109699), z_dir=(0.8660254037844378, -0.5000000000000014, 0)), keep=Keep.TOP, mode=Mode.PRIVATE)
    add(fillet2_piece_9, mode=Mode.SUBTRACT)
    with BuildSketch(Plane(origin=(0, 0, 0), x_dir=(1, 0, 0), z_dir=(0, -1, 0))) as fillet2_piece_10_section:
        with BuildLine():
            CenterArc((25 - FILLET2_R, FILLET2_R), FILLET2_R, 270, 90)
            Line((25 - FILLET2_R, 0), (25, 0))
            Line((25, 0), (25, FILLET2_R))
        make_face()
    fillet2_piece_10 = revolve(axis=Axis((0, 0, 0), (0, 0, 1)), revolution_arc=77.11426693, mode=Mode.PRIVATE)
    fillet2_piece_10 = split(fillet2_piece_10, bisect_by=Plane(origin=(7.297824439, 22.640202713, 1.231099864), z_dir=(-0.8660254037844378, 0.5000000000000017, 0)), keep=Keep.TOP, mode=Mode.PRIVATE)
    add(fillet2_piece_10, mode=Mode.SUBTRACT)


solid = part.part
